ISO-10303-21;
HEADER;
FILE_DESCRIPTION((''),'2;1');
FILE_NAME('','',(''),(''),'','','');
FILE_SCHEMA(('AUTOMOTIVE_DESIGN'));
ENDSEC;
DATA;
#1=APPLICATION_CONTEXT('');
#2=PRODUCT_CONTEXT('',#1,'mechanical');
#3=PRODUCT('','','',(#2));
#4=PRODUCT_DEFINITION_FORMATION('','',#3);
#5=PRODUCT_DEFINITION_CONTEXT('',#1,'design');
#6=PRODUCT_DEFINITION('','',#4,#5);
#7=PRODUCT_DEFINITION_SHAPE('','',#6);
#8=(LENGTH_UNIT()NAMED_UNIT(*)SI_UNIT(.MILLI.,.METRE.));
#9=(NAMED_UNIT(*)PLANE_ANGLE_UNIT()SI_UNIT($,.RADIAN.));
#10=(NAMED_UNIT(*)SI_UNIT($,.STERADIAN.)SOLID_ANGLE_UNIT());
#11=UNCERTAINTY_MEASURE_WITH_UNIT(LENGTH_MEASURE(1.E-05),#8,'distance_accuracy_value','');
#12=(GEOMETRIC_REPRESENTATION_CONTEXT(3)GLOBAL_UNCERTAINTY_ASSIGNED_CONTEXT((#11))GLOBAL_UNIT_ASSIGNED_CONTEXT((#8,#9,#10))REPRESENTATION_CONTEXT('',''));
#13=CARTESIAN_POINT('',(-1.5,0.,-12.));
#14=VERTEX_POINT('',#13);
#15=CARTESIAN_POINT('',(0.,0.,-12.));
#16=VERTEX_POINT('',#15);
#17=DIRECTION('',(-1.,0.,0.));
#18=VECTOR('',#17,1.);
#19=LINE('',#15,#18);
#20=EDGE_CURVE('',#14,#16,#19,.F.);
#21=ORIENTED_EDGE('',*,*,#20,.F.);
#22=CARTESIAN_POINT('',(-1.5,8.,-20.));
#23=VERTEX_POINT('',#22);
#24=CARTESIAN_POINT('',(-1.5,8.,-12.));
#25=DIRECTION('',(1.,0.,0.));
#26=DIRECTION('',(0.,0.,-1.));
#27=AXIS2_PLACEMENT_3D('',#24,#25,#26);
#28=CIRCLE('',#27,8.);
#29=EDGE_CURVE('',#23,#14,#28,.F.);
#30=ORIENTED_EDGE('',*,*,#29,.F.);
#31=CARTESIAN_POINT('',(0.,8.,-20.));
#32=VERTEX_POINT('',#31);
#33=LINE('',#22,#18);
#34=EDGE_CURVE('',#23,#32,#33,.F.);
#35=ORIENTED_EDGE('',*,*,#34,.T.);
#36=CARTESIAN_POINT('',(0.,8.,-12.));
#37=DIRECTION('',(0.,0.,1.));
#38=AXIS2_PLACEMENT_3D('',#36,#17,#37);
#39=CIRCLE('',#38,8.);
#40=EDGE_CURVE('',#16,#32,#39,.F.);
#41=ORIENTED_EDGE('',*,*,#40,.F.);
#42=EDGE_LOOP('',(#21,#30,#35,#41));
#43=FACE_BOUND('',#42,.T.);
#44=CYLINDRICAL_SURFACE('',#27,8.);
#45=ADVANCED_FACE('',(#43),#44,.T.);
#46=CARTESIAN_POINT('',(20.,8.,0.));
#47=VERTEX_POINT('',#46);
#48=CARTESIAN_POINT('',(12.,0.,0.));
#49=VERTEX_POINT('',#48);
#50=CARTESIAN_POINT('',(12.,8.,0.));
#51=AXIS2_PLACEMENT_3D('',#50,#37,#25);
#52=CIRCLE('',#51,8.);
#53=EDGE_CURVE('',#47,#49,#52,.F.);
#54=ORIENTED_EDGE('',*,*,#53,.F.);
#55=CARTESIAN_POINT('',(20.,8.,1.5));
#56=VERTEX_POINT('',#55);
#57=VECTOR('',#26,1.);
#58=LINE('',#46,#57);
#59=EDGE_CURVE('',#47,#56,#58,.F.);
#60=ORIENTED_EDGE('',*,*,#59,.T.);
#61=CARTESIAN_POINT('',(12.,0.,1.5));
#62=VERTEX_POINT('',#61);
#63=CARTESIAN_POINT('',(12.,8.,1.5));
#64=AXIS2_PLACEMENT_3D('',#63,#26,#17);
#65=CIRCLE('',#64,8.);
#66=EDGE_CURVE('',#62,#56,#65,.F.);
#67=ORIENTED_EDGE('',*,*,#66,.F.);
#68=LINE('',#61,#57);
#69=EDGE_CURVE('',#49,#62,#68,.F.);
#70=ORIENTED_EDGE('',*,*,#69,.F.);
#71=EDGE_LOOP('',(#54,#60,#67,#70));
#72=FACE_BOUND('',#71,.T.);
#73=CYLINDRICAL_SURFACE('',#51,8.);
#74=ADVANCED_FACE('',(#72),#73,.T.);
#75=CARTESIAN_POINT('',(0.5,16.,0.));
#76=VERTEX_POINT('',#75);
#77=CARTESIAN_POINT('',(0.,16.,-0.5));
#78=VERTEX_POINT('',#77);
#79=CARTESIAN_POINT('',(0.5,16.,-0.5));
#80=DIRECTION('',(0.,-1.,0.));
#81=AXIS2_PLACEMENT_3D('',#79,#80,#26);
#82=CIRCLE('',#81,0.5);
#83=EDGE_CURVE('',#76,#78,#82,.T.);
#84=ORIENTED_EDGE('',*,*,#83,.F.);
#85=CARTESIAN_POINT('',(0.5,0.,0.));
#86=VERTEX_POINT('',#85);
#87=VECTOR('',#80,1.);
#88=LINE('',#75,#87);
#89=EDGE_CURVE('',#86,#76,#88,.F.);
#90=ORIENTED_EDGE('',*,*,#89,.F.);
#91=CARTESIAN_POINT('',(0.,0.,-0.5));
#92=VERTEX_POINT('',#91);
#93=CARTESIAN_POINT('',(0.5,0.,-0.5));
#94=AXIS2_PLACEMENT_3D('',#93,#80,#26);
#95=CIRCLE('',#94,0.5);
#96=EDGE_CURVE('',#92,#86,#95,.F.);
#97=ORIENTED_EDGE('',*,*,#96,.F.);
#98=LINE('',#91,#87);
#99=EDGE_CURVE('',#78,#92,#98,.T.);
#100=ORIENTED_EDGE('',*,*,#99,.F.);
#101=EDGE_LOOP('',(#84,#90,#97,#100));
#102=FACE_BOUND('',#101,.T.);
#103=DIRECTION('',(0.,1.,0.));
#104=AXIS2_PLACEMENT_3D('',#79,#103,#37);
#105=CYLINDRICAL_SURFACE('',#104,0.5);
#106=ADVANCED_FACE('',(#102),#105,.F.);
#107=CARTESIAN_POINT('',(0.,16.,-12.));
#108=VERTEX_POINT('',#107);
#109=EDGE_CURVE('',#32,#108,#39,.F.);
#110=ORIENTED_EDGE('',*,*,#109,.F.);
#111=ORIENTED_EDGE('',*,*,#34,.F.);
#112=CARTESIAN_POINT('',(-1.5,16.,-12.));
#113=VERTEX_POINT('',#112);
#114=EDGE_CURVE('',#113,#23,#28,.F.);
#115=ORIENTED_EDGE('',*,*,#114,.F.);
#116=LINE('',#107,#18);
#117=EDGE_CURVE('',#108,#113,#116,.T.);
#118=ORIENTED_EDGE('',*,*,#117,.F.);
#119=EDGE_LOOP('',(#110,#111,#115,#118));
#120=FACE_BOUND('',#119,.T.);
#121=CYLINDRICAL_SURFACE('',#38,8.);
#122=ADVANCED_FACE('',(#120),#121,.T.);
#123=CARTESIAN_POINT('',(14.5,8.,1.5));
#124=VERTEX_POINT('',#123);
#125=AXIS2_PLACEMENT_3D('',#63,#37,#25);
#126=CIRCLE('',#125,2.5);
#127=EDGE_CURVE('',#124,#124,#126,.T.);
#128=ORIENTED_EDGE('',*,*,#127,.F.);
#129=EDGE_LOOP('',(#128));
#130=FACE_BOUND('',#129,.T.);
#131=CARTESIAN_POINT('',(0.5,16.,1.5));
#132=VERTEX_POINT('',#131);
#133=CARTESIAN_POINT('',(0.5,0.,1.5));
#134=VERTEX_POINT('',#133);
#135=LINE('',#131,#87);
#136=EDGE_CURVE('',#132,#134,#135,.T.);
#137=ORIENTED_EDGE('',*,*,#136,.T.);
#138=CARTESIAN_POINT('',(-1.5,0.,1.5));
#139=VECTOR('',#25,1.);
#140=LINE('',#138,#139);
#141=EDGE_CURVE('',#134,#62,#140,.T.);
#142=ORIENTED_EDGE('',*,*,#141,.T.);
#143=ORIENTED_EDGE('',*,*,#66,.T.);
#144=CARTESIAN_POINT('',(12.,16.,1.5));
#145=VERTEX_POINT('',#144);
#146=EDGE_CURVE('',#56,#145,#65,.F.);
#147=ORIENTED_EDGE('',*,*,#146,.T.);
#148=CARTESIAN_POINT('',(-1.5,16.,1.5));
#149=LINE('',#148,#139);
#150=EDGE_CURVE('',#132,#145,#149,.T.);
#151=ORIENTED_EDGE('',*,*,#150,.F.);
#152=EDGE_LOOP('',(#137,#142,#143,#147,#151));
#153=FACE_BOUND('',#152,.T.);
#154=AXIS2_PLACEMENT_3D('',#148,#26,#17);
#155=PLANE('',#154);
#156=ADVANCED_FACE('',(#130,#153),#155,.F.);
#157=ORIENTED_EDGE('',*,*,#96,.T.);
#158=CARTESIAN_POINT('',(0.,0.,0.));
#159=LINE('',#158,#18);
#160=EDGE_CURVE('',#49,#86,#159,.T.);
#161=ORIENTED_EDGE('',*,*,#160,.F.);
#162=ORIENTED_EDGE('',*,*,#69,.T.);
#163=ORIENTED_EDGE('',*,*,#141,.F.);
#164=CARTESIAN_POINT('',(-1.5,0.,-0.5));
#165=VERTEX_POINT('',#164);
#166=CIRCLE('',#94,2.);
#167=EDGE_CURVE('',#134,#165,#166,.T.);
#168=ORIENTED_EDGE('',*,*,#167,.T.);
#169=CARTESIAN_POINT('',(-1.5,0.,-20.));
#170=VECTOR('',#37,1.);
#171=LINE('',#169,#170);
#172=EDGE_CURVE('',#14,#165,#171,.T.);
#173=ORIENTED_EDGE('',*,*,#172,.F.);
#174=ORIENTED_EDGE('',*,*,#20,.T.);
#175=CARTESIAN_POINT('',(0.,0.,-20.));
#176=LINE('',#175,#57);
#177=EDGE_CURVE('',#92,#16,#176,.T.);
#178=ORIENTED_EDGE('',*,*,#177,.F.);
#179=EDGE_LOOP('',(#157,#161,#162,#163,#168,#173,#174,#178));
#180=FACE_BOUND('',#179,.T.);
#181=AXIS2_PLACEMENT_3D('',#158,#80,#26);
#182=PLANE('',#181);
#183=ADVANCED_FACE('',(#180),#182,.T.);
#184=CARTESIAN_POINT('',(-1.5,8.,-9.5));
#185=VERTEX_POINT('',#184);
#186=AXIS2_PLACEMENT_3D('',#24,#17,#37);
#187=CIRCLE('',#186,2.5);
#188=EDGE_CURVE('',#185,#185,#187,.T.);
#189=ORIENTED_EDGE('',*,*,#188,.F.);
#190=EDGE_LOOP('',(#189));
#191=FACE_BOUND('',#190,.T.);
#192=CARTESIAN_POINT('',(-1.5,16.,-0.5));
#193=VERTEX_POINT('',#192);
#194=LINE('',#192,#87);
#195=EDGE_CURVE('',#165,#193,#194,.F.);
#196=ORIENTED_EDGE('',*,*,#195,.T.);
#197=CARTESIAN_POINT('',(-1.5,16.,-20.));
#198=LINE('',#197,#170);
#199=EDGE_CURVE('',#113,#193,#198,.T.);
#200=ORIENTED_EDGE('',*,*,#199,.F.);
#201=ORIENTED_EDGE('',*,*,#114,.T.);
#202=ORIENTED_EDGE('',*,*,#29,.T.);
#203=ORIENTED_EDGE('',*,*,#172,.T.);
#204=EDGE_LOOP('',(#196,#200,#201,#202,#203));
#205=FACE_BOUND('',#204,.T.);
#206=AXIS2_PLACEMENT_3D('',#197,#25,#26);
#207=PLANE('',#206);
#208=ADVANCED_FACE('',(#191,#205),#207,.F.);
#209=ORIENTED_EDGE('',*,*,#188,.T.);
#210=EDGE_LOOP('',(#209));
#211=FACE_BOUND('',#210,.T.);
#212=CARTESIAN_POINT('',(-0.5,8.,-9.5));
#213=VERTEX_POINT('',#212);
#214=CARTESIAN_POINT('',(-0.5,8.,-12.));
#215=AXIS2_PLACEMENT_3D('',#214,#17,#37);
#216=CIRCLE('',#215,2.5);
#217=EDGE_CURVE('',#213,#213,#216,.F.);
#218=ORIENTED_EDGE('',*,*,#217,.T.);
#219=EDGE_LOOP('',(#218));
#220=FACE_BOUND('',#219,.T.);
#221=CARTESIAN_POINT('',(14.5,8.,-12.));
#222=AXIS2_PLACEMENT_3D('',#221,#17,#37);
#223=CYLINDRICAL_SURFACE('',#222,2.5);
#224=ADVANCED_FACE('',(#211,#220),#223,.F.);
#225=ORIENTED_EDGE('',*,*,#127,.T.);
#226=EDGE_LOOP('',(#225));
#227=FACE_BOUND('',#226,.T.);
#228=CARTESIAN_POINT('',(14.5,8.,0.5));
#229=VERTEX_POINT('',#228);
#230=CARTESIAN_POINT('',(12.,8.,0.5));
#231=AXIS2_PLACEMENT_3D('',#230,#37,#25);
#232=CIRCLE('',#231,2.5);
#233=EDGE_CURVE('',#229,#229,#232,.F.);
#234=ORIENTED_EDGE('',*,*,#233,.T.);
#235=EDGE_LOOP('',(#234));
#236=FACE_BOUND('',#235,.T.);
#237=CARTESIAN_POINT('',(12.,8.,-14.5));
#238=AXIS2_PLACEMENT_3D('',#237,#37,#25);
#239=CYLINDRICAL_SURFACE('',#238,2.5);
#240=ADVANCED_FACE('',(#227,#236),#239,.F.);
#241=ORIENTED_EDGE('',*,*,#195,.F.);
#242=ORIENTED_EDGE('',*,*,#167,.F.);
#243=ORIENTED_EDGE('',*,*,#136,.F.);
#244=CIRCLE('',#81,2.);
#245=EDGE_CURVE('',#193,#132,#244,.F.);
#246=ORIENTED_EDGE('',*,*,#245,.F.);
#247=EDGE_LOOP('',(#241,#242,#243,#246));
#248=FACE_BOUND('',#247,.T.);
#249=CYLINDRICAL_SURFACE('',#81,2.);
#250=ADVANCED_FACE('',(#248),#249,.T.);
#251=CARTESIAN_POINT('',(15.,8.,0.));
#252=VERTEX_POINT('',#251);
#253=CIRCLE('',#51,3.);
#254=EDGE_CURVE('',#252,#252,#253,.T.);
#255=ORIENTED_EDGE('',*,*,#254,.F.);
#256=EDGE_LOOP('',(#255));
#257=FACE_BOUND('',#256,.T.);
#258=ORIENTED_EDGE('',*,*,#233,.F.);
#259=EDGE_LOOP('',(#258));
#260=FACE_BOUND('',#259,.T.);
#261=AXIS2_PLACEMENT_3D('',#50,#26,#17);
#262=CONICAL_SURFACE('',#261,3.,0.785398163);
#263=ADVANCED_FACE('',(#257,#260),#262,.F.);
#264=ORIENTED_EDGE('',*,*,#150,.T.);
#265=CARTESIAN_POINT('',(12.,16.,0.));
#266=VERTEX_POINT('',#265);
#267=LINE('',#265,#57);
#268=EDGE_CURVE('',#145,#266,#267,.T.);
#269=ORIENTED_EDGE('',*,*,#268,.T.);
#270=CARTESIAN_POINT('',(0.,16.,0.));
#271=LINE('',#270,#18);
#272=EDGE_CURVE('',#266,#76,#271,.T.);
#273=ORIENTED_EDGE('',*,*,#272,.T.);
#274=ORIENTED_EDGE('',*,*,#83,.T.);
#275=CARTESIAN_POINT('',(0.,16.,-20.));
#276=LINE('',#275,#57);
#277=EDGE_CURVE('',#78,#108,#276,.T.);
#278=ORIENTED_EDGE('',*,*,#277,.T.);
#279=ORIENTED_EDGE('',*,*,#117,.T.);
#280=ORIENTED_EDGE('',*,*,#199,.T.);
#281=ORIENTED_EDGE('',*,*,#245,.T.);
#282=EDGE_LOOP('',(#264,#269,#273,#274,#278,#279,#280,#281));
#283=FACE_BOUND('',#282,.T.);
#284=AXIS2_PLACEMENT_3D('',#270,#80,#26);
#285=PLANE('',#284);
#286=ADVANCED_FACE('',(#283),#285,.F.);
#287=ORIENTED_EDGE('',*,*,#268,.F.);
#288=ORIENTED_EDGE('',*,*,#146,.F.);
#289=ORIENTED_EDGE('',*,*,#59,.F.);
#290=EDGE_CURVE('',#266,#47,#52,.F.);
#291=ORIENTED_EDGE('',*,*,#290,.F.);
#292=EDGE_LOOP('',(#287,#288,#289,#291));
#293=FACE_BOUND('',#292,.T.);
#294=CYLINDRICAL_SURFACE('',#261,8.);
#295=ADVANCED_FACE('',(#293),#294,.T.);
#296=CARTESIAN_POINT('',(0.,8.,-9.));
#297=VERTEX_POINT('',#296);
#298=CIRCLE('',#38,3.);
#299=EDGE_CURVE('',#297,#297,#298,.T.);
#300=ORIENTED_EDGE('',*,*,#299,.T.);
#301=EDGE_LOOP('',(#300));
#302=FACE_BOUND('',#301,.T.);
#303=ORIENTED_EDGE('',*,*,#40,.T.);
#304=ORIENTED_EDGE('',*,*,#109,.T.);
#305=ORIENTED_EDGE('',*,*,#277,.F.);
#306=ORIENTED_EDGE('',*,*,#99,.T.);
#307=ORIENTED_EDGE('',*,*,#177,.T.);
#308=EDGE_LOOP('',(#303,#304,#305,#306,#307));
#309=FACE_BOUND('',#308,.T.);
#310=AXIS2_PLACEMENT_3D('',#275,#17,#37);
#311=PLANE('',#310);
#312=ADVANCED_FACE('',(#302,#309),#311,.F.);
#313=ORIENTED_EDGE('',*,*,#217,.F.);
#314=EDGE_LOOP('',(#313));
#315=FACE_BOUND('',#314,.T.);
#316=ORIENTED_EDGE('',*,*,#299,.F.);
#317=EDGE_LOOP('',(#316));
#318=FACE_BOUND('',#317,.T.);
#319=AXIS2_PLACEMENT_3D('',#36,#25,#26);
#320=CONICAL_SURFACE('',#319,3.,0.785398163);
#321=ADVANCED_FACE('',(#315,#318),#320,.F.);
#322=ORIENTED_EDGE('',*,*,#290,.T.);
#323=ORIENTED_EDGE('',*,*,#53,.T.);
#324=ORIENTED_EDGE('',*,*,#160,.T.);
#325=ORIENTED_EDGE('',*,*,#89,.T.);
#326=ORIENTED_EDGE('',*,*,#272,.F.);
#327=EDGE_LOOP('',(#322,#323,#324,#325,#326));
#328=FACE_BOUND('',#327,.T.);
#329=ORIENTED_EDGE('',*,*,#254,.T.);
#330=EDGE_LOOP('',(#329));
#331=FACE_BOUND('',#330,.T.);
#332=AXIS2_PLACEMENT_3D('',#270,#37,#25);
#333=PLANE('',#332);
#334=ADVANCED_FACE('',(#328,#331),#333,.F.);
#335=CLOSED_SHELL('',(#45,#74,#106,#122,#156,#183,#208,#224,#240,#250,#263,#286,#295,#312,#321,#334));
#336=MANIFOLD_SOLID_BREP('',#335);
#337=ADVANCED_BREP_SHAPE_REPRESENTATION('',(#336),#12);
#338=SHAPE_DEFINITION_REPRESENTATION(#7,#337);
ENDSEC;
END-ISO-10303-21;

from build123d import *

# Parameters (mm, degrees)
EXTRUDE_1_DEPTH     = 16
FILLET_1_R          = 8
SKETCH_2_R          = 2.5
CUT_EXTRUDE_1_DEPTH = 16
SKETCH_3_R          = 2.5
CUT_EXTRUDE_2_DEPTH = 16
FILLET_3_R          = 2
FILLET_4_R          = 0.5
CHAMFER_1_SIZE      = 0.5


with BuildPart() as part:
    # Эскиз1 → Бобышка-Вытянуть1 (new body)
    with BuildSketch(Plane(origin=(0, 0, 0), x_dir=(1, 0, 0), z_dir=(0, 1, 0))):
        Polygon((0, 20), (0, 0), (20, 0), (20, -1.5), (-1.5, -1.5), (-1.5, 20), align=None)
    extrude(amount=EXTRUDE_1_DEPTH)

    # Скругление1
    fillet_1_edges = [part.edges().sort_by_distance(p)[0] for p in [
        (-0.75, 0, -20),
        (-0.75, 16, -20),
        (20, 0, 0.75),
        (20, 16, 0.75),
    ]]
    fillet(fillet_1_edges, radius=FILLET_1_R - 0.0001)  # a hair under: the kernel refuses the full size

    # Эскиз2 → Вырез-Вытянуть1 (cut)
    with BuildSketch(Plane.XY.offset(1.5)):
        with Locations((12, 8)):
            Circle(SKETCH_2_R)
    extrude(amount=-CUT_EXTRUDE_1_DEPTH, mode=Mode.SUBTRACT)

    # Эскиз3 → Вырез-Вытянуть2 (cut)
    with BuildSketch(Plane.ZY.offset(1.5)):
        with Locations((-12, 8)):
            Circle(SKETCH_3_R)
    extrude(amount=-CUT_EXTRUDE_2_DEPTH, mode=Mode.SUBTRACT)

    # Скругление3
    fillet_3_edges = [part.edges().sort_by_distance(p)[0] for p in [
        (-1.5, 8, 1.5),
    ]]
    fillet(fillet_3_edges, radius=FILLET_3_R)

    # Скругление4
    fillet_4_edges = [part.edges().sort_by_distance(p)[0] for p in [
        (0, 8, 0),
    ]]
    fillet(fillet_4_edges, radius=FILLET_4_R)

    # Фаска1
    chamfer_1_edges = [part.edges().sort_by_distance(p)[0] for p in [
        (9.5, 8, 0),
        (0, 8, -14.5),
    ]]
    chamfer(chamfer_1_edges, length=CHAMFER_1_SIZE)


solid = part.part
